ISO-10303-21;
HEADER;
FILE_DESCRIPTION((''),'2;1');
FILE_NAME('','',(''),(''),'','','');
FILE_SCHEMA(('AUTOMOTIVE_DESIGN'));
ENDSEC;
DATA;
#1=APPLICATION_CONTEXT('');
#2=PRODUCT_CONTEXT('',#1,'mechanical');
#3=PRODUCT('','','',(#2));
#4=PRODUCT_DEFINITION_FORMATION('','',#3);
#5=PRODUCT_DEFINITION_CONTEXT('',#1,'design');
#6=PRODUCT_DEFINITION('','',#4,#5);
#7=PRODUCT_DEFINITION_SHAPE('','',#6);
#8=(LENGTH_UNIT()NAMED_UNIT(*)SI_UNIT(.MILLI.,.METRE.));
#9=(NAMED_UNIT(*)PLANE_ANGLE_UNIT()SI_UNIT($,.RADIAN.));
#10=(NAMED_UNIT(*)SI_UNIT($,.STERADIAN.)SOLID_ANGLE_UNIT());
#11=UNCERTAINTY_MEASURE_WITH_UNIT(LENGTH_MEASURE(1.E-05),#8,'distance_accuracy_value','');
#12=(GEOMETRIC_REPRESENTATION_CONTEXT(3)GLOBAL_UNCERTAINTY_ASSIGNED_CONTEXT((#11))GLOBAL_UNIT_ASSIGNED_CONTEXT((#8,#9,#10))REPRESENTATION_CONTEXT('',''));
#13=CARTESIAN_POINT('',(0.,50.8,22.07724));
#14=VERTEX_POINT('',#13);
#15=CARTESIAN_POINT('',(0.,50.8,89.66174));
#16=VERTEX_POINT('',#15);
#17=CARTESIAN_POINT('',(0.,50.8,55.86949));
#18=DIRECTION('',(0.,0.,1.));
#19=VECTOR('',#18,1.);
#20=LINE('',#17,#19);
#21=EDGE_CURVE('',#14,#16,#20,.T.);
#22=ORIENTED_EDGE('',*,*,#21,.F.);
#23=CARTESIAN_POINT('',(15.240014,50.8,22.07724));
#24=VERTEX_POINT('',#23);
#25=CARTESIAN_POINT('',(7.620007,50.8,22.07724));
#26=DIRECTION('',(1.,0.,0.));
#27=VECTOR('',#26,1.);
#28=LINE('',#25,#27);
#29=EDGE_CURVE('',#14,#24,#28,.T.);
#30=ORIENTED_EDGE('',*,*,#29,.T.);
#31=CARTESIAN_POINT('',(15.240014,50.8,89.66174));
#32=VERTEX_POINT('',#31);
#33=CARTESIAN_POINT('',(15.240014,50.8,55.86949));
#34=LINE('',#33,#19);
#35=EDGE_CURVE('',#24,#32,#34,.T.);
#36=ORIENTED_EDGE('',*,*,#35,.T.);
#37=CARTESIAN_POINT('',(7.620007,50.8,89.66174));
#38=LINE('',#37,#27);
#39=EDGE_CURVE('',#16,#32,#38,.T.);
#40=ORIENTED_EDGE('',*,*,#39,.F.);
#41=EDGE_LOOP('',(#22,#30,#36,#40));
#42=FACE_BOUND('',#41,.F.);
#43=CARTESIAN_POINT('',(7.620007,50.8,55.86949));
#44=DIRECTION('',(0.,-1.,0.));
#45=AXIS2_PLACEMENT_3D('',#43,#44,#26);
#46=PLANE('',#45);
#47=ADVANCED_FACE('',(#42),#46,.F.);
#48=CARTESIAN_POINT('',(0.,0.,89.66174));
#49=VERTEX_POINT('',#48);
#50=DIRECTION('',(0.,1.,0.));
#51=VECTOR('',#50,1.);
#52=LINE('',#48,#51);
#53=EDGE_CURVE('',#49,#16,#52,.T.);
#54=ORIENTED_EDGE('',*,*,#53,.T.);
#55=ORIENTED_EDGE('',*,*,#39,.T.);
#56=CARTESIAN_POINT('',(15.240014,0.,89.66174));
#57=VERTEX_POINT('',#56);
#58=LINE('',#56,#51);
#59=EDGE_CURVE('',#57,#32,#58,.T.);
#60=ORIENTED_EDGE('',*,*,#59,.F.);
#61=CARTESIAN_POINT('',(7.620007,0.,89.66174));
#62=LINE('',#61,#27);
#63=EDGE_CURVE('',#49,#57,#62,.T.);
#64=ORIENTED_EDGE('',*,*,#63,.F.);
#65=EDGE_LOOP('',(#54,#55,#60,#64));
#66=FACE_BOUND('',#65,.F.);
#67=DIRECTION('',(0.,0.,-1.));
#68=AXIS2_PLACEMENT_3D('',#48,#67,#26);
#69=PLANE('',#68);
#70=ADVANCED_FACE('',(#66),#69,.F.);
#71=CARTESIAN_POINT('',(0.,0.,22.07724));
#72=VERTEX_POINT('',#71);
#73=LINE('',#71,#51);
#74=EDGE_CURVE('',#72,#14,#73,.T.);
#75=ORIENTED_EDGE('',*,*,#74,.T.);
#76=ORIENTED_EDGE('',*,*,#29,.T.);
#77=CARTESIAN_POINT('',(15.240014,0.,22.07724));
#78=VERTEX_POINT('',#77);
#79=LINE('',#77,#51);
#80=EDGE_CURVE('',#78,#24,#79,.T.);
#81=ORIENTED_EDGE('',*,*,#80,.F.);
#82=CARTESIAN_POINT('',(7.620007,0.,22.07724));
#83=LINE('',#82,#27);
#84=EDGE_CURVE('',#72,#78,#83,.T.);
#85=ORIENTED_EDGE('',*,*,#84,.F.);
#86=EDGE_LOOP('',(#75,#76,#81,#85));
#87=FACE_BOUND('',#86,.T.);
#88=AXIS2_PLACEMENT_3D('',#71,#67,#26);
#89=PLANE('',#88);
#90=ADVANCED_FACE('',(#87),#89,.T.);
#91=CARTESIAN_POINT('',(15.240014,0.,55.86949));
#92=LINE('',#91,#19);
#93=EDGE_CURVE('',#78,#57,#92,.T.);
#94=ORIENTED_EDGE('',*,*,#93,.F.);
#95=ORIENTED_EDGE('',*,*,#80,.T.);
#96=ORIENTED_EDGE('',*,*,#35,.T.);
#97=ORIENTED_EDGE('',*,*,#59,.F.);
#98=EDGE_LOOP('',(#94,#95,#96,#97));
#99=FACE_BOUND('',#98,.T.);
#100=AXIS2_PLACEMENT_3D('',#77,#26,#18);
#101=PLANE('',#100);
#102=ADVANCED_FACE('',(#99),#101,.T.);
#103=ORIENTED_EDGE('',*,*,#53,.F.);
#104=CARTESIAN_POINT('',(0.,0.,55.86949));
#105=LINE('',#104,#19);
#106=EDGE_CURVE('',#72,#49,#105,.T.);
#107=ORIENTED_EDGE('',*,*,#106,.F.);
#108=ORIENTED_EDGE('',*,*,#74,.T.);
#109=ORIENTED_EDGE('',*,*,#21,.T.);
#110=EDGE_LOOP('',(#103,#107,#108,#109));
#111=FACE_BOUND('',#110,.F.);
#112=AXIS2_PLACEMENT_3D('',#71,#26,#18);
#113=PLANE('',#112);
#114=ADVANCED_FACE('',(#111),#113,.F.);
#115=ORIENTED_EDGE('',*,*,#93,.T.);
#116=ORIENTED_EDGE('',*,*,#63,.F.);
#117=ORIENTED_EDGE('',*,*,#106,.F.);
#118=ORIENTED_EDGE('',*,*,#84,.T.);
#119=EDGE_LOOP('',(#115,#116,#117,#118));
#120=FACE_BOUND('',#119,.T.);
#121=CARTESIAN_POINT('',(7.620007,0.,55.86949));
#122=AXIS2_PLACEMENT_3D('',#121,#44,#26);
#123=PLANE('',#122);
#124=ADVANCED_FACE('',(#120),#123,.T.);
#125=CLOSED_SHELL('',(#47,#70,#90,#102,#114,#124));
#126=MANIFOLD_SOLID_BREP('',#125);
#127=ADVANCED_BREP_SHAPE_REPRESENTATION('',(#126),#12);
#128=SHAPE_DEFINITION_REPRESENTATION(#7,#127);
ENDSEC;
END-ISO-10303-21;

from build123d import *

# Parameters (mm, degrees)
F0_W     = 15.2400135994
F0_H     = 67.5844997168
F1_DEPTH = 50.8


# Not quite as in the source:
# - a feature names something its author has since deleted; it is built from what else it names


with BuildPart() as f1:
    # F0 (on Front) → F1 (new body)
    with BuildSketch(Plane.XZ):
        with Locations((7.6200067997, 55.8694899082)):
            Rectangle(F0_W, F0_H)
    extrude(amount=-F1_DEPTH)


solid = f1.part
